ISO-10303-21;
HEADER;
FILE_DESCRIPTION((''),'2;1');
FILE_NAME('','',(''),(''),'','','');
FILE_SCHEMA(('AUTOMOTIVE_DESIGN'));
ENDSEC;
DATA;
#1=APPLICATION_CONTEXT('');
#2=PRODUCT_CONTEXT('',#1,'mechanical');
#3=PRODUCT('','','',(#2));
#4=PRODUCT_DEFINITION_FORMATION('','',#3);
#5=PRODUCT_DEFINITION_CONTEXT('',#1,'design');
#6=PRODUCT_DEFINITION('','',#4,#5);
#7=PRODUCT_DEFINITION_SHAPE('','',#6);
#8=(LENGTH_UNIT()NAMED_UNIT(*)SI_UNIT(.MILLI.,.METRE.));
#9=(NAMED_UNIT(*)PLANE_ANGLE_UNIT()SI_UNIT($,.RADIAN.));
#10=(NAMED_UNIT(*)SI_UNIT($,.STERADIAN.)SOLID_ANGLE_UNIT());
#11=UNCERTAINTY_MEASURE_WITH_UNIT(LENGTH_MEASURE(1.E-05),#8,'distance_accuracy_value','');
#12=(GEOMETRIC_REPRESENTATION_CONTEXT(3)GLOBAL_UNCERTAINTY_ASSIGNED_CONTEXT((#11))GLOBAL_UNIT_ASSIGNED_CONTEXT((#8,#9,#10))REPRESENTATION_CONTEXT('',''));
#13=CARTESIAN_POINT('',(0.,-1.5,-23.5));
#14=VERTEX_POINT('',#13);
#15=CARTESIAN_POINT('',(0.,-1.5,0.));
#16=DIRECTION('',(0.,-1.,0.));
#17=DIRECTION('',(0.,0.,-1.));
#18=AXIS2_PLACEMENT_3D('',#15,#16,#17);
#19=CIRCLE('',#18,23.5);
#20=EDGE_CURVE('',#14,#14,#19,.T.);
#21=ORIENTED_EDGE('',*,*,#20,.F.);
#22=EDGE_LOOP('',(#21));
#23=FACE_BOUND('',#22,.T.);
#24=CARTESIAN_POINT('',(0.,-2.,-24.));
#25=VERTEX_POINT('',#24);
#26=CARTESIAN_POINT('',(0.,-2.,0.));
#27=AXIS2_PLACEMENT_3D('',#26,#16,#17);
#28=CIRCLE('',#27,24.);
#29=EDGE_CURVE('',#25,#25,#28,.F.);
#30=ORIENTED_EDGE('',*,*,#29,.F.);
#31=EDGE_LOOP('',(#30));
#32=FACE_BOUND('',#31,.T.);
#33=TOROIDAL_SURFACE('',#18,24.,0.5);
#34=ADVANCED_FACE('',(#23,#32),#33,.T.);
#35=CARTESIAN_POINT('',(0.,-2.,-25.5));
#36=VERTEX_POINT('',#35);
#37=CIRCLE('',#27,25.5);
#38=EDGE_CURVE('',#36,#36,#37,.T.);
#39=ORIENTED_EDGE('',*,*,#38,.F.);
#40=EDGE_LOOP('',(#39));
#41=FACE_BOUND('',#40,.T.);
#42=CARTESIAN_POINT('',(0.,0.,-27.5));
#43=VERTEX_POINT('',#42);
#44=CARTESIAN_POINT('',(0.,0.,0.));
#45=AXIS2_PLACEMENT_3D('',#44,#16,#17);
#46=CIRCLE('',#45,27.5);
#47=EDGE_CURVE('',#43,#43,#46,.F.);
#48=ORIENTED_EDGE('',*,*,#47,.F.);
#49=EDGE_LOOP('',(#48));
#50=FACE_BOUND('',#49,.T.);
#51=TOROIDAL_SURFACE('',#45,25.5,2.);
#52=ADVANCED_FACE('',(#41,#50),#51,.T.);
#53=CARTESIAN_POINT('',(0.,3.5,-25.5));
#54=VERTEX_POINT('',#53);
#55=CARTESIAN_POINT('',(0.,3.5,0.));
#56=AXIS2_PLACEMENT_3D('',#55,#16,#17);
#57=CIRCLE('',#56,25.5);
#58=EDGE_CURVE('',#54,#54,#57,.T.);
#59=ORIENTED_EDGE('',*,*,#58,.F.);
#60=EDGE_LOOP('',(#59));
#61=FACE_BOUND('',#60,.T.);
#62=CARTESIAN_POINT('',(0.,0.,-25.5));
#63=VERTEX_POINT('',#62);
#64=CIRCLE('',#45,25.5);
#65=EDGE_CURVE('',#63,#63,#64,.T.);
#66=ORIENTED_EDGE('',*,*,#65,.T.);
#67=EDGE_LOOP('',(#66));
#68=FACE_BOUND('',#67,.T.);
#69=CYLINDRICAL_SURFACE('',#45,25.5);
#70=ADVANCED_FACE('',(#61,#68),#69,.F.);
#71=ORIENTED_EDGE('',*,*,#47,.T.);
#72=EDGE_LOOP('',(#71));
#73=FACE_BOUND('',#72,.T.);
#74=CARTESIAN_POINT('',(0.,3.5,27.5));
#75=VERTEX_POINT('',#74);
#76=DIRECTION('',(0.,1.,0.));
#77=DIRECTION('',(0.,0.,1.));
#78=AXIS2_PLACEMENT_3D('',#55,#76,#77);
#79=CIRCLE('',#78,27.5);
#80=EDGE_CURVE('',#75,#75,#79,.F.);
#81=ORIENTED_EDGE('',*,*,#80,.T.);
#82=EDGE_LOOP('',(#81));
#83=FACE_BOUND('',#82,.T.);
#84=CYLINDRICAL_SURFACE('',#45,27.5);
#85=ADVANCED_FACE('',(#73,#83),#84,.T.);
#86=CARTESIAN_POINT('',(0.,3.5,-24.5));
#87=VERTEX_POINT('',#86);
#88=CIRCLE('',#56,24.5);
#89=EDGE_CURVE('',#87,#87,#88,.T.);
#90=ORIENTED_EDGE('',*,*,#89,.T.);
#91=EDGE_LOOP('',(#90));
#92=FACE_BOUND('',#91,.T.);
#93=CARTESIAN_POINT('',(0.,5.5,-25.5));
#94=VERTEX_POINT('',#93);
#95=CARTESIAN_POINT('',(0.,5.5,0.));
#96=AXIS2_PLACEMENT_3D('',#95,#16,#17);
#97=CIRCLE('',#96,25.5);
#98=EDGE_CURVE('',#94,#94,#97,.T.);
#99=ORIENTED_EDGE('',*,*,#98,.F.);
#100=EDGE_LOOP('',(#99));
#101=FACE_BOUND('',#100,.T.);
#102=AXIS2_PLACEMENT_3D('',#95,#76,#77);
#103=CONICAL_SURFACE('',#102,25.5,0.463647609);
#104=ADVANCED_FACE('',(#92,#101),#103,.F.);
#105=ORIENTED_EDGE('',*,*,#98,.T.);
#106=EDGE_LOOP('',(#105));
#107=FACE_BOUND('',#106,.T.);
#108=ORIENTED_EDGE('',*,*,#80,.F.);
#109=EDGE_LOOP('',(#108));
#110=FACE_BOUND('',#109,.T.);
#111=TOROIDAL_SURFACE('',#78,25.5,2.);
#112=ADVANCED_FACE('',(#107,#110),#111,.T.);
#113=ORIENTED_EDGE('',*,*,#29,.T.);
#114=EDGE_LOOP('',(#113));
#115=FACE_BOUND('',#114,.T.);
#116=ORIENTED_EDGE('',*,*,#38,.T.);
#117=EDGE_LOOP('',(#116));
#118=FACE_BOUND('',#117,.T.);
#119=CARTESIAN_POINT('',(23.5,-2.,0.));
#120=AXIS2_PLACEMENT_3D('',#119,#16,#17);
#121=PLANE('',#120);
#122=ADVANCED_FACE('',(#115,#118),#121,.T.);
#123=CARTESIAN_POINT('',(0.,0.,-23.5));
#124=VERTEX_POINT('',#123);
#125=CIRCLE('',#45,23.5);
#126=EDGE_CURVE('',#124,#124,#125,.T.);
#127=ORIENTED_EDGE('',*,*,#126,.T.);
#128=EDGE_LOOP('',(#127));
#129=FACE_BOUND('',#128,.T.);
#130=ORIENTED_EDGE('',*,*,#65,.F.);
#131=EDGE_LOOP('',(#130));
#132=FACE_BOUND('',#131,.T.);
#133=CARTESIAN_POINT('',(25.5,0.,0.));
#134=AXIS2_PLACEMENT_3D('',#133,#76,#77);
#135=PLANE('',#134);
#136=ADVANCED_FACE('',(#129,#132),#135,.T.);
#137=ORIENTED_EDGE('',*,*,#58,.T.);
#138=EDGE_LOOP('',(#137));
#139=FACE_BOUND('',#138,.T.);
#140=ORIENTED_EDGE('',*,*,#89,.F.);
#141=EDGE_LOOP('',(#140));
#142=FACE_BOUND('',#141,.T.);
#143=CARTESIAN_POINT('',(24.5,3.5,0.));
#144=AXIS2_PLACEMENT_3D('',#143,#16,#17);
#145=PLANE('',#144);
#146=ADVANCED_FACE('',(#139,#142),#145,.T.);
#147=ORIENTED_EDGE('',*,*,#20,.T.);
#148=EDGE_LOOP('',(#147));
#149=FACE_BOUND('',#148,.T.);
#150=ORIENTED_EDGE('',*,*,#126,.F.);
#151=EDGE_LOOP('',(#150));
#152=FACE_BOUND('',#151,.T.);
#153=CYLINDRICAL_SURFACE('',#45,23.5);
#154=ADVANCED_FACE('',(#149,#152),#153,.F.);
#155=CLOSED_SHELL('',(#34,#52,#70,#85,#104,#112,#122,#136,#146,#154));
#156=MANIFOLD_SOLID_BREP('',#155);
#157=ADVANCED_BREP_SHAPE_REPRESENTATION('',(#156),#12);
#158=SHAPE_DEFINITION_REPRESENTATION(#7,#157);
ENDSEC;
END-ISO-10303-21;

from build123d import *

# Parameters (mm, degrees)
FILLET2_R = 2
FILLET3_R = 0.5


with BuildPart() as part:
    # Sketch1 → Revolve1 (revolve)
    with BuildSketch(Plane.XY, mode=Mode.PRIVATE) as revolve1_sk:
        Polygon((25.5, 0), (23.5, 0), (23.5, -2), (27.5, -2), (27.5, 5.5), (25.5, 5.5), (24.5, 3.5), (25.5, 3.5), align=None)
    revolve(revolve1_sk.sketch.rotate(Axis((0, 0, 0), (0, 1, 0)), 90), axis=Axis((0, 0, 0), (0, 1, 0)))

    # Fillet2
    fillet2_edges = [part.edges().sort_by_distance(p)[0] for p in [
        (0, -2, 27.5),
        (0, 5.5, 27.5),
    ]]
    fillet(fillet2_edges, radius=FILLET2_R - 0.0001)  # a hair under: the kernel refuses the full size

    # Fillet3
    fillet3_edges = [part.edges().sort_by_distance(p)[0] for p in [
        (0, -2, 23.5),
    ]]
    fillet(fillet3_edges, radius=FILLET3_R)


solid = part.part
